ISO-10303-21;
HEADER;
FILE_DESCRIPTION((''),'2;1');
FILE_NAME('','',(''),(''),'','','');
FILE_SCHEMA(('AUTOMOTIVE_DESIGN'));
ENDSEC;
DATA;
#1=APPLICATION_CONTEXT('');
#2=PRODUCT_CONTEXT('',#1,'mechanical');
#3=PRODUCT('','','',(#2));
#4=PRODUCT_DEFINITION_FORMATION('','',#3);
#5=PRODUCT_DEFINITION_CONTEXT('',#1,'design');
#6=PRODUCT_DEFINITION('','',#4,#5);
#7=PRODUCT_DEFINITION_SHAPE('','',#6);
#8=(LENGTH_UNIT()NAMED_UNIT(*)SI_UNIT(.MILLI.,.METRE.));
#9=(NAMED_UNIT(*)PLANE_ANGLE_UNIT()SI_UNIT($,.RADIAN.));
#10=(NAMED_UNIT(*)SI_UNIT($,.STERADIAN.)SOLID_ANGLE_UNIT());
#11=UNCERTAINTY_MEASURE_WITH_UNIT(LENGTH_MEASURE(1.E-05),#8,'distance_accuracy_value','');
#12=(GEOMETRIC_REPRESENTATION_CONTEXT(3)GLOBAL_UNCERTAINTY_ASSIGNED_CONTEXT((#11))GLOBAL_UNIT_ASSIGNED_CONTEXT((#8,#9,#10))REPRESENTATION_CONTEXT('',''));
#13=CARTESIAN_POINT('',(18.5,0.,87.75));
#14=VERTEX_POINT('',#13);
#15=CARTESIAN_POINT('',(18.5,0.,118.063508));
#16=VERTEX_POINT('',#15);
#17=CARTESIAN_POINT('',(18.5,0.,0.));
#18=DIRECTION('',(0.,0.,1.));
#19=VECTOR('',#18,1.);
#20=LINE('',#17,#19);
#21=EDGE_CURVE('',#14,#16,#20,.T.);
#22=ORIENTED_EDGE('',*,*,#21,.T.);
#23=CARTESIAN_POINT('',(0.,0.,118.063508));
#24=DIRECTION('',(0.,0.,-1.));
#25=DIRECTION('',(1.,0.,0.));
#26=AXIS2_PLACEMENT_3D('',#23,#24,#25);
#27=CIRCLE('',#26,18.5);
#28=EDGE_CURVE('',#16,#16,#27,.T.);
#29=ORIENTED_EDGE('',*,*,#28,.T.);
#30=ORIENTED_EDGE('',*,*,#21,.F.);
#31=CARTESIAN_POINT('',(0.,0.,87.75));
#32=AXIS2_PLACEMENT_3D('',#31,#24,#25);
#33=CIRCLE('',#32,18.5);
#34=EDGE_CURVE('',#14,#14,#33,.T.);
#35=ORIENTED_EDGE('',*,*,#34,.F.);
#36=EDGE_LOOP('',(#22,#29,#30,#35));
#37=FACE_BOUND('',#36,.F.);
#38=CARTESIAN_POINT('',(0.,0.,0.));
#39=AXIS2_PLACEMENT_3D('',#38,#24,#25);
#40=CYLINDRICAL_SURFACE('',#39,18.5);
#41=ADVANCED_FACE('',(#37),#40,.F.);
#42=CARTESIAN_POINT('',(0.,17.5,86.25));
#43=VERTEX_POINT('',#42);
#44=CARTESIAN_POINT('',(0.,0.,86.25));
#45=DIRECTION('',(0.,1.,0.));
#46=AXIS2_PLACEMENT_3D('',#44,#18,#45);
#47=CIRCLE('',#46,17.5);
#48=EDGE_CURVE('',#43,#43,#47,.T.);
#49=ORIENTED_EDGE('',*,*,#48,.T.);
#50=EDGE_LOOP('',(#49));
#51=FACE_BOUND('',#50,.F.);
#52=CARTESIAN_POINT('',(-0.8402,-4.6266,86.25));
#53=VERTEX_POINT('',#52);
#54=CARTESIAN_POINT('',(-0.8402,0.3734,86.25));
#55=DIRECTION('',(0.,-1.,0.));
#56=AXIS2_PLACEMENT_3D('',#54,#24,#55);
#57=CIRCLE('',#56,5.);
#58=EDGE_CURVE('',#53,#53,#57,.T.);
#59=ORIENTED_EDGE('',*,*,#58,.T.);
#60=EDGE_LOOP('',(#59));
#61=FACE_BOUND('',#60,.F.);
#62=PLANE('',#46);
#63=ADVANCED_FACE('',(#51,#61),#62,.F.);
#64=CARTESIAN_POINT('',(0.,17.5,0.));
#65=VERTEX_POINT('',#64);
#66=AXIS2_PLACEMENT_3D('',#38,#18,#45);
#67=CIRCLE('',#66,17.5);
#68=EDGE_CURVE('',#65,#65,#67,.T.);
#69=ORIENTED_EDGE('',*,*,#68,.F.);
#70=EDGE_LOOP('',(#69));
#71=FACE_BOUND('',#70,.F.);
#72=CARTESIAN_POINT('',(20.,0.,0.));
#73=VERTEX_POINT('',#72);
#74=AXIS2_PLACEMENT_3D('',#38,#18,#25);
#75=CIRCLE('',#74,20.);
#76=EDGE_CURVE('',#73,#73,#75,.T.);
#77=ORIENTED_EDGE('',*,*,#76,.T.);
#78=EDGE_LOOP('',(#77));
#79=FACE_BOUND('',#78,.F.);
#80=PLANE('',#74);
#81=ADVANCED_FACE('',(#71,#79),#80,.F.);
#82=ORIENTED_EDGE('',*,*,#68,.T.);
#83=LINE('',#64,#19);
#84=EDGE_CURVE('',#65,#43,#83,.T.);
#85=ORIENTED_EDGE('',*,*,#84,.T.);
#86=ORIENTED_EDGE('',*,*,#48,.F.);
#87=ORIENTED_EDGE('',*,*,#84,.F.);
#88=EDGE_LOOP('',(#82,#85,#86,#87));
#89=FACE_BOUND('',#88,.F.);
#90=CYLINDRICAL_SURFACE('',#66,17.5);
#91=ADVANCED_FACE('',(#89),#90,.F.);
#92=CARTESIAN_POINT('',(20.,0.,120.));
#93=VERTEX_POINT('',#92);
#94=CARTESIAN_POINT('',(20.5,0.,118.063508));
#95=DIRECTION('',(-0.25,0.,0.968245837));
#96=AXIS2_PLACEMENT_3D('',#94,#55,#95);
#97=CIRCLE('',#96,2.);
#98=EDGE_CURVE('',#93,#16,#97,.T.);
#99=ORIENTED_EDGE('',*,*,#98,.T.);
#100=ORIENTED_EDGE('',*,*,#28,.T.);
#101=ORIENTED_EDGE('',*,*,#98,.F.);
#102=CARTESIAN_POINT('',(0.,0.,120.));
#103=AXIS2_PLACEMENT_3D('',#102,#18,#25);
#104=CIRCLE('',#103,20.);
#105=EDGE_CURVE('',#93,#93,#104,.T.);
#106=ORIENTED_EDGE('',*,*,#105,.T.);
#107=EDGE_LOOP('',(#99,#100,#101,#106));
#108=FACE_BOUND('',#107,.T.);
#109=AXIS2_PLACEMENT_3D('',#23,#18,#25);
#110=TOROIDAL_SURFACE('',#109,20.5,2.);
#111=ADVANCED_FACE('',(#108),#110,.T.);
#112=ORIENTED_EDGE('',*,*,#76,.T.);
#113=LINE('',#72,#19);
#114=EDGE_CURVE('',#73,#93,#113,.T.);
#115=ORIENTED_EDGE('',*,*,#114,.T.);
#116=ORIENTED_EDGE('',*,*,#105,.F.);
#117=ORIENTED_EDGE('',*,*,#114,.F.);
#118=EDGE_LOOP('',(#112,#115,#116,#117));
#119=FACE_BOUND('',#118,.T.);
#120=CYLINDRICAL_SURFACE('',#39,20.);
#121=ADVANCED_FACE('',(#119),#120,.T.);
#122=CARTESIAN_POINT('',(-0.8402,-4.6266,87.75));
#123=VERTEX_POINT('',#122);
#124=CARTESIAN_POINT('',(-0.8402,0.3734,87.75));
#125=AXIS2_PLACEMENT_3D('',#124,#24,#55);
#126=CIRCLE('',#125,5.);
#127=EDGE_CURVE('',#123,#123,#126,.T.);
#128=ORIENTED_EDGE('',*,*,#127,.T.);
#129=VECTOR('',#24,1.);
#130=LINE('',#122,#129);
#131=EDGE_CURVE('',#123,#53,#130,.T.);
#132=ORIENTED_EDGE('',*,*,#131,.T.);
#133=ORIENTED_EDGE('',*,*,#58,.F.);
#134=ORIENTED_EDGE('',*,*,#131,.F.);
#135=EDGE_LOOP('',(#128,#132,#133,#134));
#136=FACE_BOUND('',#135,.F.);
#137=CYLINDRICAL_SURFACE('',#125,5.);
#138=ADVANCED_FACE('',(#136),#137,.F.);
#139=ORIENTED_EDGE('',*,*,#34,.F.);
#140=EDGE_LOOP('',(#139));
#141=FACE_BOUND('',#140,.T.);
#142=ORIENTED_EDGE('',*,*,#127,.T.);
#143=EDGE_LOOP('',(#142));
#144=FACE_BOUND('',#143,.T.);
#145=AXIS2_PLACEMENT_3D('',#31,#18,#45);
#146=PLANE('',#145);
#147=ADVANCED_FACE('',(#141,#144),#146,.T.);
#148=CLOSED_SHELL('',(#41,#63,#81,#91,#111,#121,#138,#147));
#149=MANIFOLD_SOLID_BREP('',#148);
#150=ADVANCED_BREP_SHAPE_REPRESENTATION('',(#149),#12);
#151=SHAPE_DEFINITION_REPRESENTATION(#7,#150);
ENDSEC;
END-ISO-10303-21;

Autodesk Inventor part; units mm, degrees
ref_plane "YZ Plane" through (0, 0, 0) normal (1, 0, 0) x (0, 1, 0)
ref_plane "XZ Plane" through (0, 0, 0) normal (0, 1, 0) x (-1, 0, 0)
ref_plane "XY Plane" through (0, 0, 0) normal (0, 0, 1) x (1, 0, 0)
sketch "Sketch1" plane through (0, 0, 0) normal (0, 0, 1) x (1, 0, 0)
  circle A0 centre (0, 0) radius 20
  dimension "d0" = 40
extrude "Extrusion1" add sketch "Sketch1" along normal blind 120
sketch "Sketch2" plane through (0, 0, 0) normal (0, 0, -1) x (-1, 0, 0)
  point P0 (0, 0)
  point P1 (0, 0)
hole "Hole1" at (0, 0, 0) at (0, 0, 0) direction (0, 0, 1) diameter 35 depth 86.25
shell "Shell1" thickness 1.5 removed faces 1 at (-2.364, 6.2334, 120)
sketch "Sketch3" plane through (0, 0, 87.75) normal (0, 0, 1) x (1, 0, 0)
  point P0 (0, 0)
  point P1 (-0.8402, 0.3734)
hole "Hole2" at (-0.8402, 0.3734, 87.75) direction (0, 0, -1) diameter 10 depth 86.25
fillet "Fillet1" radius 2 1 edges at (-18.5, 0, 120)
thread "Thread1" size "M40x3" class "6g" standard "ANSI Metric M Profile" length 25
thread "Thread2" size "M38x1.5" class "6H" standard "ANSI Metric M Profile" length 10
properties part number "badan lampu" material "Aluminum 6061-AHC"
